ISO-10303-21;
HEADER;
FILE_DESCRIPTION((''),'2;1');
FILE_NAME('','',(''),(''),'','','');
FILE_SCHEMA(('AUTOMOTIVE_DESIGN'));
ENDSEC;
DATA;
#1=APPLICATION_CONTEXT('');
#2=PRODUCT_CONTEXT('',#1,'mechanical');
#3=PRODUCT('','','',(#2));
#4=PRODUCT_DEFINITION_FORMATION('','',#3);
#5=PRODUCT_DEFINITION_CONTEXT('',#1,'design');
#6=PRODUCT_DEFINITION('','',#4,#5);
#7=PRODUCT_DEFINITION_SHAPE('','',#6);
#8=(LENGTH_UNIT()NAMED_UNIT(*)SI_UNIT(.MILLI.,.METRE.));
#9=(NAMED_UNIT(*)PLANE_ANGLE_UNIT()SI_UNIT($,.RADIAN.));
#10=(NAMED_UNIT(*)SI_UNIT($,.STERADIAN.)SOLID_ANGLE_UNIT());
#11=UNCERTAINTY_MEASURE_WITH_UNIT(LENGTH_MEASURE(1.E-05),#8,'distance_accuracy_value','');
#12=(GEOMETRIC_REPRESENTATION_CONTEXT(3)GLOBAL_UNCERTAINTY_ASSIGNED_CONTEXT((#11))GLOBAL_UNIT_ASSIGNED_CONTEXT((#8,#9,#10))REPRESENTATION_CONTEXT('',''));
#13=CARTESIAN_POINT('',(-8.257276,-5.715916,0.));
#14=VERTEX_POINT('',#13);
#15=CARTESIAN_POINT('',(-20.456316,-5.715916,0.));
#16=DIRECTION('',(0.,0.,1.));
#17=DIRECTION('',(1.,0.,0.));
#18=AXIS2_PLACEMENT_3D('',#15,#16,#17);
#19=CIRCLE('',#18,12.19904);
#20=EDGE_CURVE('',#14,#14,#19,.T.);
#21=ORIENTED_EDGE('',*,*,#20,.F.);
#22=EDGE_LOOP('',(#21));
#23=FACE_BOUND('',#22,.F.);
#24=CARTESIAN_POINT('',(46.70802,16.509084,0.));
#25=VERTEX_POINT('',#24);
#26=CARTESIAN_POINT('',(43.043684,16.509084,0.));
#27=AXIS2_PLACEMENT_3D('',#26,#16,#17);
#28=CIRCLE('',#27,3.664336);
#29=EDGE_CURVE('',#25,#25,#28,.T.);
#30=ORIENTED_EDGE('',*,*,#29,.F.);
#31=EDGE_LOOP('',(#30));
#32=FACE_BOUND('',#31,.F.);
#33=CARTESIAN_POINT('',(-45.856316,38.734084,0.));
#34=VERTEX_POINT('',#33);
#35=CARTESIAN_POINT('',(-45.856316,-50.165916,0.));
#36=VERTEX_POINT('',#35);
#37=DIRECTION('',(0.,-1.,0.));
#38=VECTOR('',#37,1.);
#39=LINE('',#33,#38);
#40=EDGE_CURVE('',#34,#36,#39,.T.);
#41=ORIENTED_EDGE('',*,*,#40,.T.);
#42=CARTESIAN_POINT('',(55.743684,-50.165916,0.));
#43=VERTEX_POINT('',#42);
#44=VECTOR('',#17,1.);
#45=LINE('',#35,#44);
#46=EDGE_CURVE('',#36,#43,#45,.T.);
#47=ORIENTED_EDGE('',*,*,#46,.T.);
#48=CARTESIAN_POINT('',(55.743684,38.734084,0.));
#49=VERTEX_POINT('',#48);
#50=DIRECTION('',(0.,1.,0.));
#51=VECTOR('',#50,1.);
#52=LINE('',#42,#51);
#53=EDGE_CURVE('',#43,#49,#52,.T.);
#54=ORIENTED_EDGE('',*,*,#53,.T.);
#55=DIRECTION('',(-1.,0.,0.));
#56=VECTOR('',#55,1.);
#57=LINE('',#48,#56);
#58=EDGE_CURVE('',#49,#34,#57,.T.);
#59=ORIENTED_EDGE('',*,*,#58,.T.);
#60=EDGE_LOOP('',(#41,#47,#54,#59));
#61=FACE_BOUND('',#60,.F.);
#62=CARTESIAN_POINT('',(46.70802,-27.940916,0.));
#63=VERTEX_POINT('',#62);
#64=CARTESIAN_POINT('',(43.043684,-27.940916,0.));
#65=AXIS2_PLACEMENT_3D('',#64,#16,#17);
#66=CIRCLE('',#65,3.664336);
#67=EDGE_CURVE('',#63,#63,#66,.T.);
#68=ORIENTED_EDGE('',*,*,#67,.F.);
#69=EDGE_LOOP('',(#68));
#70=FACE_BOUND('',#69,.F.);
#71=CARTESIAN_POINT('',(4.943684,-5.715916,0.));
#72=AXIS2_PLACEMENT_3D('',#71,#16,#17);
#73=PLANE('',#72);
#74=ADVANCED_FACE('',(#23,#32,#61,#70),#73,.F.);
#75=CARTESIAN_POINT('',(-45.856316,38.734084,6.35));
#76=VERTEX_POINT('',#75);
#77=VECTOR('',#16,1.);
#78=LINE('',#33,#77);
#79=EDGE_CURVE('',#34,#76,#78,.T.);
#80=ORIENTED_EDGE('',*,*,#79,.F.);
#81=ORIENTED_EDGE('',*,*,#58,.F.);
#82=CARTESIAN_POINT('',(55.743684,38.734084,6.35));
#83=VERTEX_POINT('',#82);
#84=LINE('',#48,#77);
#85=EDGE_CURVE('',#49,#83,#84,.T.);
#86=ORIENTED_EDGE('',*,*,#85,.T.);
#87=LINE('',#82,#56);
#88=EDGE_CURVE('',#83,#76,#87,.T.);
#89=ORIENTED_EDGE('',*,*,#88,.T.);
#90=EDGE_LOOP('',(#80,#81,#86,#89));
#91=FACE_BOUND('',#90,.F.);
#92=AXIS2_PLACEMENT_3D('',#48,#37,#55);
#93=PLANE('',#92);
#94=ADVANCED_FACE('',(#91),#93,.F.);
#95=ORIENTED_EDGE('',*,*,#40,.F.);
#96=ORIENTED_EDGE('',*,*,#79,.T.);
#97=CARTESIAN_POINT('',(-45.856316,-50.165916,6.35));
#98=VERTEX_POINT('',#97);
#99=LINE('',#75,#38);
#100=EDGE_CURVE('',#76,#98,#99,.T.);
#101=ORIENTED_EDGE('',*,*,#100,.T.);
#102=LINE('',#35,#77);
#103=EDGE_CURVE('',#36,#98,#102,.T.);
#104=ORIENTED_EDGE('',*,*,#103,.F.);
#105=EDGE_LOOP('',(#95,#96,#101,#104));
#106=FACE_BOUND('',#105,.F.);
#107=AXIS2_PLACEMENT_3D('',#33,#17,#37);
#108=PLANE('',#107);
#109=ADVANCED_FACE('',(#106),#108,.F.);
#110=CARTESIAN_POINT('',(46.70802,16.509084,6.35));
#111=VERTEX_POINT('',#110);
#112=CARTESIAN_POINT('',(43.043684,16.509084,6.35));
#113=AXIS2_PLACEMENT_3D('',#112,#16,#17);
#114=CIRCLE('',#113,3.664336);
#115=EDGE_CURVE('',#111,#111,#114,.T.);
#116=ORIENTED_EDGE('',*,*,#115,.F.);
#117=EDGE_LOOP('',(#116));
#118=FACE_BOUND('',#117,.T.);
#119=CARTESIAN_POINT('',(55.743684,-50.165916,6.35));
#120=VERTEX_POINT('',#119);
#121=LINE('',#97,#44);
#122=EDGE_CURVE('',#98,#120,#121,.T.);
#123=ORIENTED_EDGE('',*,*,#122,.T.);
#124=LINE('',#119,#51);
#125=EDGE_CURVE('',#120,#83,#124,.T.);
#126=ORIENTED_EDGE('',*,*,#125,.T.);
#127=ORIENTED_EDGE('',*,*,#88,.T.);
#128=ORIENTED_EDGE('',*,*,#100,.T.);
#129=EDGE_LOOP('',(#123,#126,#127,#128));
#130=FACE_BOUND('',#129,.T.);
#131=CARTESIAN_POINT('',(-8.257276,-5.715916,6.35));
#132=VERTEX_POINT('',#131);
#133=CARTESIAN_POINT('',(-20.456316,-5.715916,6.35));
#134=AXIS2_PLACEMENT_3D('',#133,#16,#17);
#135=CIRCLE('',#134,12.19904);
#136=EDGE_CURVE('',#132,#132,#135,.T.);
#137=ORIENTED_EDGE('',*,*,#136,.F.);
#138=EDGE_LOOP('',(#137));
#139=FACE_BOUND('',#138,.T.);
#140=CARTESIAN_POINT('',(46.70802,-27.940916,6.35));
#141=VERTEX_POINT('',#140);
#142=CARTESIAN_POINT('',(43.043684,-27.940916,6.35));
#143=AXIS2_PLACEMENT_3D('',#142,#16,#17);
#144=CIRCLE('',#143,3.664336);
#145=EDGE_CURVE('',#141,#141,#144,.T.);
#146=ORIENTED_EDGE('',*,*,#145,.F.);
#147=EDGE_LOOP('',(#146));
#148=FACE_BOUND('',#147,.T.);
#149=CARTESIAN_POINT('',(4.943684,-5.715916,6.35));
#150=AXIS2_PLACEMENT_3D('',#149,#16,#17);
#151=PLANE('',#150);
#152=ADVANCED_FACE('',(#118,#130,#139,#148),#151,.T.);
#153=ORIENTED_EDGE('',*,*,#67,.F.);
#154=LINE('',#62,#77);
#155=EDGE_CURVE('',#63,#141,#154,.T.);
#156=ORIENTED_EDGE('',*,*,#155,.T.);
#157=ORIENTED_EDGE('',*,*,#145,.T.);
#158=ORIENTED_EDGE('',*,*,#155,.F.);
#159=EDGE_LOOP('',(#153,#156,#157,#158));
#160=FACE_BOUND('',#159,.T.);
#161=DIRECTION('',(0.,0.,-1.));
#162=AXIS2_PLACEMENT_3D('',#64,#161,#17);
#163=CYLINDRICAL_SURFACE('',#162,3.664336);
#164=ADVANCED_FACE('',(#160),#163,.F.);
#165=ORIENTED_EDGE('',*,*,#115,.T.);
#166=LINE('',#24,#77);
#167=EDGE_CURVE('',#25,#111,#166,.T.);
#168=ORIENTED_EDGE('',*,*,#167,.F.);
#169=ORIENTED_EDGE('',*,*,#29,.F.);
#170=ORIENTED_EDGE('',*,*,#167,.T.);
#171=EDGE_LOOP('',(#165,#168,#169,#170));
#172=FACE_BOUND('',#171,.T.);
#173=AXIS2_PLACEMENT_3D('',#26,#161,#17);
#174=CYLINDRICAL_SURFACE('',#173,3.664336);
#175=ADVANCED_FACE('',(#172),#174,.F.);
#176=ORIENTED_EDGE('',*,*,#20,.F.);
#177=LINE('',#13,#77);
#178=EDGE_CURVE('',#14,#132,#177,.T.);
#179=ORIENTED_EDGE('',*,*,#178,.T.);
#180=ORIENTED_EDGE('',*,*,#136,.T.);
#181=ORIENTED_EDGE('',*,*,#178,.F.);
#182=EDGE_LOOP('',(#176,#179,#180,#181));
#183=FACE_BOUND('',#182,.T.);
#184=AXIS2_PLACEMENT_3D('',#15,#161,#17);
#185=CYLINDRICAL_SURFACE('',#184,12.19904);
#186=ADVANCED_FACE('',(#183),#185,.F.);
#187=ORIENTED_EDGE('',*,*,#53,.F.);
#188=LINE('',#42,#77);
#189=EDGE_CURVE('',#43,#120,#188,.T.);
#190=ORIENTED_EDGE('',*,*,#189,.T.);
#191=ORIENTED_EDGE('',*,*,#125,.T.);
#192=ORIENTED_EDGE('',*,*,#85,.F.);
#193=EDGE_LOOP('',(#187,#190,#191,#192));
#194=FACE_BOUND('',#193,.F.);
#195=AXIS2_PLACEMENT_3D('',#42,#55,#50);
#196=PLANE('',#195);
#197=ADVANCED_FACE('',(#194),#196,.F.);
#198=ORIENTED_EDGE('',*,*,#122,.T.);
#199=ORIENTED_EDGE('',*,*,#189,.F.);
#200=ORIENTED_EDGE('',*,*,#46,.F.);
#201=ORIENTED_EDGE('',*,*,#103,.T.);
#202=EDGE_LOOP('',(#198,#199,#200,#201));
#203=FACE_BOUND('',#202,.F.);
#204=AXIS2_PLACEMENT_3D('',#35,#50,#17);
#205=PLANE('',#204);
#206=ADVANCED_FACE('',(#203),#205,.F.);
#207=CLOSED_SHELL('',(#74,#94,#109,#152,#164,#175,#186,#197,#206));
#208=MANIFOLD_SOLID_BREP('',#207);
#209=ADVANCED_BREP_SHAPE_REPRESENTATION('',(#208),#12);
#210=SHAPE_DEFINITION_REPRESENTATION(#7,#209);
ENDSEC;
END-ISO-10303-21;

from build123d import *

# Parameters (mm, degrees)
F0_R     = 3.6643363337
F0_R_2   = 12.1990402392
F1_DEPTH = 6.35


# Not quite as in the source:
# - a feature names something its author has since deleted; it is built from what else it names


with BuildPart() as f1:
    # F0 (on Top) → F1 (new body)
    with BuildSketch(Plane.XY):
        Polygon((4.9436837435, 38.7340840895), (-45.8563162565, 38.7340840895), (-45.8563162565, -50.1659159105), (4.9436837435, -50.1659159105), (30.3436837435, -50.1659159105), (55.7436837435, -50.1659159105), (55.7436837435, -5.7159159105), (55.7436837435, 38.7340840895), (30.3436837435, 38.7340840895), align=None)
        with Locations((43.0436837435, -27.9409159105)):
            Circle(F0_R, mode=Mode.SUBTRACT)
        with Locations((-20.4563162565, -5.7159159105)):
            Circle(F0_R_2, mode=Mode.SUBTRACT)
        with Locations((43.0436837435, 16.5090840895)):
            Circle(F0_R, mode=Mode.SUBTRACT)
    extrude(amount=F1_DEPTH)


solid = f1.part
